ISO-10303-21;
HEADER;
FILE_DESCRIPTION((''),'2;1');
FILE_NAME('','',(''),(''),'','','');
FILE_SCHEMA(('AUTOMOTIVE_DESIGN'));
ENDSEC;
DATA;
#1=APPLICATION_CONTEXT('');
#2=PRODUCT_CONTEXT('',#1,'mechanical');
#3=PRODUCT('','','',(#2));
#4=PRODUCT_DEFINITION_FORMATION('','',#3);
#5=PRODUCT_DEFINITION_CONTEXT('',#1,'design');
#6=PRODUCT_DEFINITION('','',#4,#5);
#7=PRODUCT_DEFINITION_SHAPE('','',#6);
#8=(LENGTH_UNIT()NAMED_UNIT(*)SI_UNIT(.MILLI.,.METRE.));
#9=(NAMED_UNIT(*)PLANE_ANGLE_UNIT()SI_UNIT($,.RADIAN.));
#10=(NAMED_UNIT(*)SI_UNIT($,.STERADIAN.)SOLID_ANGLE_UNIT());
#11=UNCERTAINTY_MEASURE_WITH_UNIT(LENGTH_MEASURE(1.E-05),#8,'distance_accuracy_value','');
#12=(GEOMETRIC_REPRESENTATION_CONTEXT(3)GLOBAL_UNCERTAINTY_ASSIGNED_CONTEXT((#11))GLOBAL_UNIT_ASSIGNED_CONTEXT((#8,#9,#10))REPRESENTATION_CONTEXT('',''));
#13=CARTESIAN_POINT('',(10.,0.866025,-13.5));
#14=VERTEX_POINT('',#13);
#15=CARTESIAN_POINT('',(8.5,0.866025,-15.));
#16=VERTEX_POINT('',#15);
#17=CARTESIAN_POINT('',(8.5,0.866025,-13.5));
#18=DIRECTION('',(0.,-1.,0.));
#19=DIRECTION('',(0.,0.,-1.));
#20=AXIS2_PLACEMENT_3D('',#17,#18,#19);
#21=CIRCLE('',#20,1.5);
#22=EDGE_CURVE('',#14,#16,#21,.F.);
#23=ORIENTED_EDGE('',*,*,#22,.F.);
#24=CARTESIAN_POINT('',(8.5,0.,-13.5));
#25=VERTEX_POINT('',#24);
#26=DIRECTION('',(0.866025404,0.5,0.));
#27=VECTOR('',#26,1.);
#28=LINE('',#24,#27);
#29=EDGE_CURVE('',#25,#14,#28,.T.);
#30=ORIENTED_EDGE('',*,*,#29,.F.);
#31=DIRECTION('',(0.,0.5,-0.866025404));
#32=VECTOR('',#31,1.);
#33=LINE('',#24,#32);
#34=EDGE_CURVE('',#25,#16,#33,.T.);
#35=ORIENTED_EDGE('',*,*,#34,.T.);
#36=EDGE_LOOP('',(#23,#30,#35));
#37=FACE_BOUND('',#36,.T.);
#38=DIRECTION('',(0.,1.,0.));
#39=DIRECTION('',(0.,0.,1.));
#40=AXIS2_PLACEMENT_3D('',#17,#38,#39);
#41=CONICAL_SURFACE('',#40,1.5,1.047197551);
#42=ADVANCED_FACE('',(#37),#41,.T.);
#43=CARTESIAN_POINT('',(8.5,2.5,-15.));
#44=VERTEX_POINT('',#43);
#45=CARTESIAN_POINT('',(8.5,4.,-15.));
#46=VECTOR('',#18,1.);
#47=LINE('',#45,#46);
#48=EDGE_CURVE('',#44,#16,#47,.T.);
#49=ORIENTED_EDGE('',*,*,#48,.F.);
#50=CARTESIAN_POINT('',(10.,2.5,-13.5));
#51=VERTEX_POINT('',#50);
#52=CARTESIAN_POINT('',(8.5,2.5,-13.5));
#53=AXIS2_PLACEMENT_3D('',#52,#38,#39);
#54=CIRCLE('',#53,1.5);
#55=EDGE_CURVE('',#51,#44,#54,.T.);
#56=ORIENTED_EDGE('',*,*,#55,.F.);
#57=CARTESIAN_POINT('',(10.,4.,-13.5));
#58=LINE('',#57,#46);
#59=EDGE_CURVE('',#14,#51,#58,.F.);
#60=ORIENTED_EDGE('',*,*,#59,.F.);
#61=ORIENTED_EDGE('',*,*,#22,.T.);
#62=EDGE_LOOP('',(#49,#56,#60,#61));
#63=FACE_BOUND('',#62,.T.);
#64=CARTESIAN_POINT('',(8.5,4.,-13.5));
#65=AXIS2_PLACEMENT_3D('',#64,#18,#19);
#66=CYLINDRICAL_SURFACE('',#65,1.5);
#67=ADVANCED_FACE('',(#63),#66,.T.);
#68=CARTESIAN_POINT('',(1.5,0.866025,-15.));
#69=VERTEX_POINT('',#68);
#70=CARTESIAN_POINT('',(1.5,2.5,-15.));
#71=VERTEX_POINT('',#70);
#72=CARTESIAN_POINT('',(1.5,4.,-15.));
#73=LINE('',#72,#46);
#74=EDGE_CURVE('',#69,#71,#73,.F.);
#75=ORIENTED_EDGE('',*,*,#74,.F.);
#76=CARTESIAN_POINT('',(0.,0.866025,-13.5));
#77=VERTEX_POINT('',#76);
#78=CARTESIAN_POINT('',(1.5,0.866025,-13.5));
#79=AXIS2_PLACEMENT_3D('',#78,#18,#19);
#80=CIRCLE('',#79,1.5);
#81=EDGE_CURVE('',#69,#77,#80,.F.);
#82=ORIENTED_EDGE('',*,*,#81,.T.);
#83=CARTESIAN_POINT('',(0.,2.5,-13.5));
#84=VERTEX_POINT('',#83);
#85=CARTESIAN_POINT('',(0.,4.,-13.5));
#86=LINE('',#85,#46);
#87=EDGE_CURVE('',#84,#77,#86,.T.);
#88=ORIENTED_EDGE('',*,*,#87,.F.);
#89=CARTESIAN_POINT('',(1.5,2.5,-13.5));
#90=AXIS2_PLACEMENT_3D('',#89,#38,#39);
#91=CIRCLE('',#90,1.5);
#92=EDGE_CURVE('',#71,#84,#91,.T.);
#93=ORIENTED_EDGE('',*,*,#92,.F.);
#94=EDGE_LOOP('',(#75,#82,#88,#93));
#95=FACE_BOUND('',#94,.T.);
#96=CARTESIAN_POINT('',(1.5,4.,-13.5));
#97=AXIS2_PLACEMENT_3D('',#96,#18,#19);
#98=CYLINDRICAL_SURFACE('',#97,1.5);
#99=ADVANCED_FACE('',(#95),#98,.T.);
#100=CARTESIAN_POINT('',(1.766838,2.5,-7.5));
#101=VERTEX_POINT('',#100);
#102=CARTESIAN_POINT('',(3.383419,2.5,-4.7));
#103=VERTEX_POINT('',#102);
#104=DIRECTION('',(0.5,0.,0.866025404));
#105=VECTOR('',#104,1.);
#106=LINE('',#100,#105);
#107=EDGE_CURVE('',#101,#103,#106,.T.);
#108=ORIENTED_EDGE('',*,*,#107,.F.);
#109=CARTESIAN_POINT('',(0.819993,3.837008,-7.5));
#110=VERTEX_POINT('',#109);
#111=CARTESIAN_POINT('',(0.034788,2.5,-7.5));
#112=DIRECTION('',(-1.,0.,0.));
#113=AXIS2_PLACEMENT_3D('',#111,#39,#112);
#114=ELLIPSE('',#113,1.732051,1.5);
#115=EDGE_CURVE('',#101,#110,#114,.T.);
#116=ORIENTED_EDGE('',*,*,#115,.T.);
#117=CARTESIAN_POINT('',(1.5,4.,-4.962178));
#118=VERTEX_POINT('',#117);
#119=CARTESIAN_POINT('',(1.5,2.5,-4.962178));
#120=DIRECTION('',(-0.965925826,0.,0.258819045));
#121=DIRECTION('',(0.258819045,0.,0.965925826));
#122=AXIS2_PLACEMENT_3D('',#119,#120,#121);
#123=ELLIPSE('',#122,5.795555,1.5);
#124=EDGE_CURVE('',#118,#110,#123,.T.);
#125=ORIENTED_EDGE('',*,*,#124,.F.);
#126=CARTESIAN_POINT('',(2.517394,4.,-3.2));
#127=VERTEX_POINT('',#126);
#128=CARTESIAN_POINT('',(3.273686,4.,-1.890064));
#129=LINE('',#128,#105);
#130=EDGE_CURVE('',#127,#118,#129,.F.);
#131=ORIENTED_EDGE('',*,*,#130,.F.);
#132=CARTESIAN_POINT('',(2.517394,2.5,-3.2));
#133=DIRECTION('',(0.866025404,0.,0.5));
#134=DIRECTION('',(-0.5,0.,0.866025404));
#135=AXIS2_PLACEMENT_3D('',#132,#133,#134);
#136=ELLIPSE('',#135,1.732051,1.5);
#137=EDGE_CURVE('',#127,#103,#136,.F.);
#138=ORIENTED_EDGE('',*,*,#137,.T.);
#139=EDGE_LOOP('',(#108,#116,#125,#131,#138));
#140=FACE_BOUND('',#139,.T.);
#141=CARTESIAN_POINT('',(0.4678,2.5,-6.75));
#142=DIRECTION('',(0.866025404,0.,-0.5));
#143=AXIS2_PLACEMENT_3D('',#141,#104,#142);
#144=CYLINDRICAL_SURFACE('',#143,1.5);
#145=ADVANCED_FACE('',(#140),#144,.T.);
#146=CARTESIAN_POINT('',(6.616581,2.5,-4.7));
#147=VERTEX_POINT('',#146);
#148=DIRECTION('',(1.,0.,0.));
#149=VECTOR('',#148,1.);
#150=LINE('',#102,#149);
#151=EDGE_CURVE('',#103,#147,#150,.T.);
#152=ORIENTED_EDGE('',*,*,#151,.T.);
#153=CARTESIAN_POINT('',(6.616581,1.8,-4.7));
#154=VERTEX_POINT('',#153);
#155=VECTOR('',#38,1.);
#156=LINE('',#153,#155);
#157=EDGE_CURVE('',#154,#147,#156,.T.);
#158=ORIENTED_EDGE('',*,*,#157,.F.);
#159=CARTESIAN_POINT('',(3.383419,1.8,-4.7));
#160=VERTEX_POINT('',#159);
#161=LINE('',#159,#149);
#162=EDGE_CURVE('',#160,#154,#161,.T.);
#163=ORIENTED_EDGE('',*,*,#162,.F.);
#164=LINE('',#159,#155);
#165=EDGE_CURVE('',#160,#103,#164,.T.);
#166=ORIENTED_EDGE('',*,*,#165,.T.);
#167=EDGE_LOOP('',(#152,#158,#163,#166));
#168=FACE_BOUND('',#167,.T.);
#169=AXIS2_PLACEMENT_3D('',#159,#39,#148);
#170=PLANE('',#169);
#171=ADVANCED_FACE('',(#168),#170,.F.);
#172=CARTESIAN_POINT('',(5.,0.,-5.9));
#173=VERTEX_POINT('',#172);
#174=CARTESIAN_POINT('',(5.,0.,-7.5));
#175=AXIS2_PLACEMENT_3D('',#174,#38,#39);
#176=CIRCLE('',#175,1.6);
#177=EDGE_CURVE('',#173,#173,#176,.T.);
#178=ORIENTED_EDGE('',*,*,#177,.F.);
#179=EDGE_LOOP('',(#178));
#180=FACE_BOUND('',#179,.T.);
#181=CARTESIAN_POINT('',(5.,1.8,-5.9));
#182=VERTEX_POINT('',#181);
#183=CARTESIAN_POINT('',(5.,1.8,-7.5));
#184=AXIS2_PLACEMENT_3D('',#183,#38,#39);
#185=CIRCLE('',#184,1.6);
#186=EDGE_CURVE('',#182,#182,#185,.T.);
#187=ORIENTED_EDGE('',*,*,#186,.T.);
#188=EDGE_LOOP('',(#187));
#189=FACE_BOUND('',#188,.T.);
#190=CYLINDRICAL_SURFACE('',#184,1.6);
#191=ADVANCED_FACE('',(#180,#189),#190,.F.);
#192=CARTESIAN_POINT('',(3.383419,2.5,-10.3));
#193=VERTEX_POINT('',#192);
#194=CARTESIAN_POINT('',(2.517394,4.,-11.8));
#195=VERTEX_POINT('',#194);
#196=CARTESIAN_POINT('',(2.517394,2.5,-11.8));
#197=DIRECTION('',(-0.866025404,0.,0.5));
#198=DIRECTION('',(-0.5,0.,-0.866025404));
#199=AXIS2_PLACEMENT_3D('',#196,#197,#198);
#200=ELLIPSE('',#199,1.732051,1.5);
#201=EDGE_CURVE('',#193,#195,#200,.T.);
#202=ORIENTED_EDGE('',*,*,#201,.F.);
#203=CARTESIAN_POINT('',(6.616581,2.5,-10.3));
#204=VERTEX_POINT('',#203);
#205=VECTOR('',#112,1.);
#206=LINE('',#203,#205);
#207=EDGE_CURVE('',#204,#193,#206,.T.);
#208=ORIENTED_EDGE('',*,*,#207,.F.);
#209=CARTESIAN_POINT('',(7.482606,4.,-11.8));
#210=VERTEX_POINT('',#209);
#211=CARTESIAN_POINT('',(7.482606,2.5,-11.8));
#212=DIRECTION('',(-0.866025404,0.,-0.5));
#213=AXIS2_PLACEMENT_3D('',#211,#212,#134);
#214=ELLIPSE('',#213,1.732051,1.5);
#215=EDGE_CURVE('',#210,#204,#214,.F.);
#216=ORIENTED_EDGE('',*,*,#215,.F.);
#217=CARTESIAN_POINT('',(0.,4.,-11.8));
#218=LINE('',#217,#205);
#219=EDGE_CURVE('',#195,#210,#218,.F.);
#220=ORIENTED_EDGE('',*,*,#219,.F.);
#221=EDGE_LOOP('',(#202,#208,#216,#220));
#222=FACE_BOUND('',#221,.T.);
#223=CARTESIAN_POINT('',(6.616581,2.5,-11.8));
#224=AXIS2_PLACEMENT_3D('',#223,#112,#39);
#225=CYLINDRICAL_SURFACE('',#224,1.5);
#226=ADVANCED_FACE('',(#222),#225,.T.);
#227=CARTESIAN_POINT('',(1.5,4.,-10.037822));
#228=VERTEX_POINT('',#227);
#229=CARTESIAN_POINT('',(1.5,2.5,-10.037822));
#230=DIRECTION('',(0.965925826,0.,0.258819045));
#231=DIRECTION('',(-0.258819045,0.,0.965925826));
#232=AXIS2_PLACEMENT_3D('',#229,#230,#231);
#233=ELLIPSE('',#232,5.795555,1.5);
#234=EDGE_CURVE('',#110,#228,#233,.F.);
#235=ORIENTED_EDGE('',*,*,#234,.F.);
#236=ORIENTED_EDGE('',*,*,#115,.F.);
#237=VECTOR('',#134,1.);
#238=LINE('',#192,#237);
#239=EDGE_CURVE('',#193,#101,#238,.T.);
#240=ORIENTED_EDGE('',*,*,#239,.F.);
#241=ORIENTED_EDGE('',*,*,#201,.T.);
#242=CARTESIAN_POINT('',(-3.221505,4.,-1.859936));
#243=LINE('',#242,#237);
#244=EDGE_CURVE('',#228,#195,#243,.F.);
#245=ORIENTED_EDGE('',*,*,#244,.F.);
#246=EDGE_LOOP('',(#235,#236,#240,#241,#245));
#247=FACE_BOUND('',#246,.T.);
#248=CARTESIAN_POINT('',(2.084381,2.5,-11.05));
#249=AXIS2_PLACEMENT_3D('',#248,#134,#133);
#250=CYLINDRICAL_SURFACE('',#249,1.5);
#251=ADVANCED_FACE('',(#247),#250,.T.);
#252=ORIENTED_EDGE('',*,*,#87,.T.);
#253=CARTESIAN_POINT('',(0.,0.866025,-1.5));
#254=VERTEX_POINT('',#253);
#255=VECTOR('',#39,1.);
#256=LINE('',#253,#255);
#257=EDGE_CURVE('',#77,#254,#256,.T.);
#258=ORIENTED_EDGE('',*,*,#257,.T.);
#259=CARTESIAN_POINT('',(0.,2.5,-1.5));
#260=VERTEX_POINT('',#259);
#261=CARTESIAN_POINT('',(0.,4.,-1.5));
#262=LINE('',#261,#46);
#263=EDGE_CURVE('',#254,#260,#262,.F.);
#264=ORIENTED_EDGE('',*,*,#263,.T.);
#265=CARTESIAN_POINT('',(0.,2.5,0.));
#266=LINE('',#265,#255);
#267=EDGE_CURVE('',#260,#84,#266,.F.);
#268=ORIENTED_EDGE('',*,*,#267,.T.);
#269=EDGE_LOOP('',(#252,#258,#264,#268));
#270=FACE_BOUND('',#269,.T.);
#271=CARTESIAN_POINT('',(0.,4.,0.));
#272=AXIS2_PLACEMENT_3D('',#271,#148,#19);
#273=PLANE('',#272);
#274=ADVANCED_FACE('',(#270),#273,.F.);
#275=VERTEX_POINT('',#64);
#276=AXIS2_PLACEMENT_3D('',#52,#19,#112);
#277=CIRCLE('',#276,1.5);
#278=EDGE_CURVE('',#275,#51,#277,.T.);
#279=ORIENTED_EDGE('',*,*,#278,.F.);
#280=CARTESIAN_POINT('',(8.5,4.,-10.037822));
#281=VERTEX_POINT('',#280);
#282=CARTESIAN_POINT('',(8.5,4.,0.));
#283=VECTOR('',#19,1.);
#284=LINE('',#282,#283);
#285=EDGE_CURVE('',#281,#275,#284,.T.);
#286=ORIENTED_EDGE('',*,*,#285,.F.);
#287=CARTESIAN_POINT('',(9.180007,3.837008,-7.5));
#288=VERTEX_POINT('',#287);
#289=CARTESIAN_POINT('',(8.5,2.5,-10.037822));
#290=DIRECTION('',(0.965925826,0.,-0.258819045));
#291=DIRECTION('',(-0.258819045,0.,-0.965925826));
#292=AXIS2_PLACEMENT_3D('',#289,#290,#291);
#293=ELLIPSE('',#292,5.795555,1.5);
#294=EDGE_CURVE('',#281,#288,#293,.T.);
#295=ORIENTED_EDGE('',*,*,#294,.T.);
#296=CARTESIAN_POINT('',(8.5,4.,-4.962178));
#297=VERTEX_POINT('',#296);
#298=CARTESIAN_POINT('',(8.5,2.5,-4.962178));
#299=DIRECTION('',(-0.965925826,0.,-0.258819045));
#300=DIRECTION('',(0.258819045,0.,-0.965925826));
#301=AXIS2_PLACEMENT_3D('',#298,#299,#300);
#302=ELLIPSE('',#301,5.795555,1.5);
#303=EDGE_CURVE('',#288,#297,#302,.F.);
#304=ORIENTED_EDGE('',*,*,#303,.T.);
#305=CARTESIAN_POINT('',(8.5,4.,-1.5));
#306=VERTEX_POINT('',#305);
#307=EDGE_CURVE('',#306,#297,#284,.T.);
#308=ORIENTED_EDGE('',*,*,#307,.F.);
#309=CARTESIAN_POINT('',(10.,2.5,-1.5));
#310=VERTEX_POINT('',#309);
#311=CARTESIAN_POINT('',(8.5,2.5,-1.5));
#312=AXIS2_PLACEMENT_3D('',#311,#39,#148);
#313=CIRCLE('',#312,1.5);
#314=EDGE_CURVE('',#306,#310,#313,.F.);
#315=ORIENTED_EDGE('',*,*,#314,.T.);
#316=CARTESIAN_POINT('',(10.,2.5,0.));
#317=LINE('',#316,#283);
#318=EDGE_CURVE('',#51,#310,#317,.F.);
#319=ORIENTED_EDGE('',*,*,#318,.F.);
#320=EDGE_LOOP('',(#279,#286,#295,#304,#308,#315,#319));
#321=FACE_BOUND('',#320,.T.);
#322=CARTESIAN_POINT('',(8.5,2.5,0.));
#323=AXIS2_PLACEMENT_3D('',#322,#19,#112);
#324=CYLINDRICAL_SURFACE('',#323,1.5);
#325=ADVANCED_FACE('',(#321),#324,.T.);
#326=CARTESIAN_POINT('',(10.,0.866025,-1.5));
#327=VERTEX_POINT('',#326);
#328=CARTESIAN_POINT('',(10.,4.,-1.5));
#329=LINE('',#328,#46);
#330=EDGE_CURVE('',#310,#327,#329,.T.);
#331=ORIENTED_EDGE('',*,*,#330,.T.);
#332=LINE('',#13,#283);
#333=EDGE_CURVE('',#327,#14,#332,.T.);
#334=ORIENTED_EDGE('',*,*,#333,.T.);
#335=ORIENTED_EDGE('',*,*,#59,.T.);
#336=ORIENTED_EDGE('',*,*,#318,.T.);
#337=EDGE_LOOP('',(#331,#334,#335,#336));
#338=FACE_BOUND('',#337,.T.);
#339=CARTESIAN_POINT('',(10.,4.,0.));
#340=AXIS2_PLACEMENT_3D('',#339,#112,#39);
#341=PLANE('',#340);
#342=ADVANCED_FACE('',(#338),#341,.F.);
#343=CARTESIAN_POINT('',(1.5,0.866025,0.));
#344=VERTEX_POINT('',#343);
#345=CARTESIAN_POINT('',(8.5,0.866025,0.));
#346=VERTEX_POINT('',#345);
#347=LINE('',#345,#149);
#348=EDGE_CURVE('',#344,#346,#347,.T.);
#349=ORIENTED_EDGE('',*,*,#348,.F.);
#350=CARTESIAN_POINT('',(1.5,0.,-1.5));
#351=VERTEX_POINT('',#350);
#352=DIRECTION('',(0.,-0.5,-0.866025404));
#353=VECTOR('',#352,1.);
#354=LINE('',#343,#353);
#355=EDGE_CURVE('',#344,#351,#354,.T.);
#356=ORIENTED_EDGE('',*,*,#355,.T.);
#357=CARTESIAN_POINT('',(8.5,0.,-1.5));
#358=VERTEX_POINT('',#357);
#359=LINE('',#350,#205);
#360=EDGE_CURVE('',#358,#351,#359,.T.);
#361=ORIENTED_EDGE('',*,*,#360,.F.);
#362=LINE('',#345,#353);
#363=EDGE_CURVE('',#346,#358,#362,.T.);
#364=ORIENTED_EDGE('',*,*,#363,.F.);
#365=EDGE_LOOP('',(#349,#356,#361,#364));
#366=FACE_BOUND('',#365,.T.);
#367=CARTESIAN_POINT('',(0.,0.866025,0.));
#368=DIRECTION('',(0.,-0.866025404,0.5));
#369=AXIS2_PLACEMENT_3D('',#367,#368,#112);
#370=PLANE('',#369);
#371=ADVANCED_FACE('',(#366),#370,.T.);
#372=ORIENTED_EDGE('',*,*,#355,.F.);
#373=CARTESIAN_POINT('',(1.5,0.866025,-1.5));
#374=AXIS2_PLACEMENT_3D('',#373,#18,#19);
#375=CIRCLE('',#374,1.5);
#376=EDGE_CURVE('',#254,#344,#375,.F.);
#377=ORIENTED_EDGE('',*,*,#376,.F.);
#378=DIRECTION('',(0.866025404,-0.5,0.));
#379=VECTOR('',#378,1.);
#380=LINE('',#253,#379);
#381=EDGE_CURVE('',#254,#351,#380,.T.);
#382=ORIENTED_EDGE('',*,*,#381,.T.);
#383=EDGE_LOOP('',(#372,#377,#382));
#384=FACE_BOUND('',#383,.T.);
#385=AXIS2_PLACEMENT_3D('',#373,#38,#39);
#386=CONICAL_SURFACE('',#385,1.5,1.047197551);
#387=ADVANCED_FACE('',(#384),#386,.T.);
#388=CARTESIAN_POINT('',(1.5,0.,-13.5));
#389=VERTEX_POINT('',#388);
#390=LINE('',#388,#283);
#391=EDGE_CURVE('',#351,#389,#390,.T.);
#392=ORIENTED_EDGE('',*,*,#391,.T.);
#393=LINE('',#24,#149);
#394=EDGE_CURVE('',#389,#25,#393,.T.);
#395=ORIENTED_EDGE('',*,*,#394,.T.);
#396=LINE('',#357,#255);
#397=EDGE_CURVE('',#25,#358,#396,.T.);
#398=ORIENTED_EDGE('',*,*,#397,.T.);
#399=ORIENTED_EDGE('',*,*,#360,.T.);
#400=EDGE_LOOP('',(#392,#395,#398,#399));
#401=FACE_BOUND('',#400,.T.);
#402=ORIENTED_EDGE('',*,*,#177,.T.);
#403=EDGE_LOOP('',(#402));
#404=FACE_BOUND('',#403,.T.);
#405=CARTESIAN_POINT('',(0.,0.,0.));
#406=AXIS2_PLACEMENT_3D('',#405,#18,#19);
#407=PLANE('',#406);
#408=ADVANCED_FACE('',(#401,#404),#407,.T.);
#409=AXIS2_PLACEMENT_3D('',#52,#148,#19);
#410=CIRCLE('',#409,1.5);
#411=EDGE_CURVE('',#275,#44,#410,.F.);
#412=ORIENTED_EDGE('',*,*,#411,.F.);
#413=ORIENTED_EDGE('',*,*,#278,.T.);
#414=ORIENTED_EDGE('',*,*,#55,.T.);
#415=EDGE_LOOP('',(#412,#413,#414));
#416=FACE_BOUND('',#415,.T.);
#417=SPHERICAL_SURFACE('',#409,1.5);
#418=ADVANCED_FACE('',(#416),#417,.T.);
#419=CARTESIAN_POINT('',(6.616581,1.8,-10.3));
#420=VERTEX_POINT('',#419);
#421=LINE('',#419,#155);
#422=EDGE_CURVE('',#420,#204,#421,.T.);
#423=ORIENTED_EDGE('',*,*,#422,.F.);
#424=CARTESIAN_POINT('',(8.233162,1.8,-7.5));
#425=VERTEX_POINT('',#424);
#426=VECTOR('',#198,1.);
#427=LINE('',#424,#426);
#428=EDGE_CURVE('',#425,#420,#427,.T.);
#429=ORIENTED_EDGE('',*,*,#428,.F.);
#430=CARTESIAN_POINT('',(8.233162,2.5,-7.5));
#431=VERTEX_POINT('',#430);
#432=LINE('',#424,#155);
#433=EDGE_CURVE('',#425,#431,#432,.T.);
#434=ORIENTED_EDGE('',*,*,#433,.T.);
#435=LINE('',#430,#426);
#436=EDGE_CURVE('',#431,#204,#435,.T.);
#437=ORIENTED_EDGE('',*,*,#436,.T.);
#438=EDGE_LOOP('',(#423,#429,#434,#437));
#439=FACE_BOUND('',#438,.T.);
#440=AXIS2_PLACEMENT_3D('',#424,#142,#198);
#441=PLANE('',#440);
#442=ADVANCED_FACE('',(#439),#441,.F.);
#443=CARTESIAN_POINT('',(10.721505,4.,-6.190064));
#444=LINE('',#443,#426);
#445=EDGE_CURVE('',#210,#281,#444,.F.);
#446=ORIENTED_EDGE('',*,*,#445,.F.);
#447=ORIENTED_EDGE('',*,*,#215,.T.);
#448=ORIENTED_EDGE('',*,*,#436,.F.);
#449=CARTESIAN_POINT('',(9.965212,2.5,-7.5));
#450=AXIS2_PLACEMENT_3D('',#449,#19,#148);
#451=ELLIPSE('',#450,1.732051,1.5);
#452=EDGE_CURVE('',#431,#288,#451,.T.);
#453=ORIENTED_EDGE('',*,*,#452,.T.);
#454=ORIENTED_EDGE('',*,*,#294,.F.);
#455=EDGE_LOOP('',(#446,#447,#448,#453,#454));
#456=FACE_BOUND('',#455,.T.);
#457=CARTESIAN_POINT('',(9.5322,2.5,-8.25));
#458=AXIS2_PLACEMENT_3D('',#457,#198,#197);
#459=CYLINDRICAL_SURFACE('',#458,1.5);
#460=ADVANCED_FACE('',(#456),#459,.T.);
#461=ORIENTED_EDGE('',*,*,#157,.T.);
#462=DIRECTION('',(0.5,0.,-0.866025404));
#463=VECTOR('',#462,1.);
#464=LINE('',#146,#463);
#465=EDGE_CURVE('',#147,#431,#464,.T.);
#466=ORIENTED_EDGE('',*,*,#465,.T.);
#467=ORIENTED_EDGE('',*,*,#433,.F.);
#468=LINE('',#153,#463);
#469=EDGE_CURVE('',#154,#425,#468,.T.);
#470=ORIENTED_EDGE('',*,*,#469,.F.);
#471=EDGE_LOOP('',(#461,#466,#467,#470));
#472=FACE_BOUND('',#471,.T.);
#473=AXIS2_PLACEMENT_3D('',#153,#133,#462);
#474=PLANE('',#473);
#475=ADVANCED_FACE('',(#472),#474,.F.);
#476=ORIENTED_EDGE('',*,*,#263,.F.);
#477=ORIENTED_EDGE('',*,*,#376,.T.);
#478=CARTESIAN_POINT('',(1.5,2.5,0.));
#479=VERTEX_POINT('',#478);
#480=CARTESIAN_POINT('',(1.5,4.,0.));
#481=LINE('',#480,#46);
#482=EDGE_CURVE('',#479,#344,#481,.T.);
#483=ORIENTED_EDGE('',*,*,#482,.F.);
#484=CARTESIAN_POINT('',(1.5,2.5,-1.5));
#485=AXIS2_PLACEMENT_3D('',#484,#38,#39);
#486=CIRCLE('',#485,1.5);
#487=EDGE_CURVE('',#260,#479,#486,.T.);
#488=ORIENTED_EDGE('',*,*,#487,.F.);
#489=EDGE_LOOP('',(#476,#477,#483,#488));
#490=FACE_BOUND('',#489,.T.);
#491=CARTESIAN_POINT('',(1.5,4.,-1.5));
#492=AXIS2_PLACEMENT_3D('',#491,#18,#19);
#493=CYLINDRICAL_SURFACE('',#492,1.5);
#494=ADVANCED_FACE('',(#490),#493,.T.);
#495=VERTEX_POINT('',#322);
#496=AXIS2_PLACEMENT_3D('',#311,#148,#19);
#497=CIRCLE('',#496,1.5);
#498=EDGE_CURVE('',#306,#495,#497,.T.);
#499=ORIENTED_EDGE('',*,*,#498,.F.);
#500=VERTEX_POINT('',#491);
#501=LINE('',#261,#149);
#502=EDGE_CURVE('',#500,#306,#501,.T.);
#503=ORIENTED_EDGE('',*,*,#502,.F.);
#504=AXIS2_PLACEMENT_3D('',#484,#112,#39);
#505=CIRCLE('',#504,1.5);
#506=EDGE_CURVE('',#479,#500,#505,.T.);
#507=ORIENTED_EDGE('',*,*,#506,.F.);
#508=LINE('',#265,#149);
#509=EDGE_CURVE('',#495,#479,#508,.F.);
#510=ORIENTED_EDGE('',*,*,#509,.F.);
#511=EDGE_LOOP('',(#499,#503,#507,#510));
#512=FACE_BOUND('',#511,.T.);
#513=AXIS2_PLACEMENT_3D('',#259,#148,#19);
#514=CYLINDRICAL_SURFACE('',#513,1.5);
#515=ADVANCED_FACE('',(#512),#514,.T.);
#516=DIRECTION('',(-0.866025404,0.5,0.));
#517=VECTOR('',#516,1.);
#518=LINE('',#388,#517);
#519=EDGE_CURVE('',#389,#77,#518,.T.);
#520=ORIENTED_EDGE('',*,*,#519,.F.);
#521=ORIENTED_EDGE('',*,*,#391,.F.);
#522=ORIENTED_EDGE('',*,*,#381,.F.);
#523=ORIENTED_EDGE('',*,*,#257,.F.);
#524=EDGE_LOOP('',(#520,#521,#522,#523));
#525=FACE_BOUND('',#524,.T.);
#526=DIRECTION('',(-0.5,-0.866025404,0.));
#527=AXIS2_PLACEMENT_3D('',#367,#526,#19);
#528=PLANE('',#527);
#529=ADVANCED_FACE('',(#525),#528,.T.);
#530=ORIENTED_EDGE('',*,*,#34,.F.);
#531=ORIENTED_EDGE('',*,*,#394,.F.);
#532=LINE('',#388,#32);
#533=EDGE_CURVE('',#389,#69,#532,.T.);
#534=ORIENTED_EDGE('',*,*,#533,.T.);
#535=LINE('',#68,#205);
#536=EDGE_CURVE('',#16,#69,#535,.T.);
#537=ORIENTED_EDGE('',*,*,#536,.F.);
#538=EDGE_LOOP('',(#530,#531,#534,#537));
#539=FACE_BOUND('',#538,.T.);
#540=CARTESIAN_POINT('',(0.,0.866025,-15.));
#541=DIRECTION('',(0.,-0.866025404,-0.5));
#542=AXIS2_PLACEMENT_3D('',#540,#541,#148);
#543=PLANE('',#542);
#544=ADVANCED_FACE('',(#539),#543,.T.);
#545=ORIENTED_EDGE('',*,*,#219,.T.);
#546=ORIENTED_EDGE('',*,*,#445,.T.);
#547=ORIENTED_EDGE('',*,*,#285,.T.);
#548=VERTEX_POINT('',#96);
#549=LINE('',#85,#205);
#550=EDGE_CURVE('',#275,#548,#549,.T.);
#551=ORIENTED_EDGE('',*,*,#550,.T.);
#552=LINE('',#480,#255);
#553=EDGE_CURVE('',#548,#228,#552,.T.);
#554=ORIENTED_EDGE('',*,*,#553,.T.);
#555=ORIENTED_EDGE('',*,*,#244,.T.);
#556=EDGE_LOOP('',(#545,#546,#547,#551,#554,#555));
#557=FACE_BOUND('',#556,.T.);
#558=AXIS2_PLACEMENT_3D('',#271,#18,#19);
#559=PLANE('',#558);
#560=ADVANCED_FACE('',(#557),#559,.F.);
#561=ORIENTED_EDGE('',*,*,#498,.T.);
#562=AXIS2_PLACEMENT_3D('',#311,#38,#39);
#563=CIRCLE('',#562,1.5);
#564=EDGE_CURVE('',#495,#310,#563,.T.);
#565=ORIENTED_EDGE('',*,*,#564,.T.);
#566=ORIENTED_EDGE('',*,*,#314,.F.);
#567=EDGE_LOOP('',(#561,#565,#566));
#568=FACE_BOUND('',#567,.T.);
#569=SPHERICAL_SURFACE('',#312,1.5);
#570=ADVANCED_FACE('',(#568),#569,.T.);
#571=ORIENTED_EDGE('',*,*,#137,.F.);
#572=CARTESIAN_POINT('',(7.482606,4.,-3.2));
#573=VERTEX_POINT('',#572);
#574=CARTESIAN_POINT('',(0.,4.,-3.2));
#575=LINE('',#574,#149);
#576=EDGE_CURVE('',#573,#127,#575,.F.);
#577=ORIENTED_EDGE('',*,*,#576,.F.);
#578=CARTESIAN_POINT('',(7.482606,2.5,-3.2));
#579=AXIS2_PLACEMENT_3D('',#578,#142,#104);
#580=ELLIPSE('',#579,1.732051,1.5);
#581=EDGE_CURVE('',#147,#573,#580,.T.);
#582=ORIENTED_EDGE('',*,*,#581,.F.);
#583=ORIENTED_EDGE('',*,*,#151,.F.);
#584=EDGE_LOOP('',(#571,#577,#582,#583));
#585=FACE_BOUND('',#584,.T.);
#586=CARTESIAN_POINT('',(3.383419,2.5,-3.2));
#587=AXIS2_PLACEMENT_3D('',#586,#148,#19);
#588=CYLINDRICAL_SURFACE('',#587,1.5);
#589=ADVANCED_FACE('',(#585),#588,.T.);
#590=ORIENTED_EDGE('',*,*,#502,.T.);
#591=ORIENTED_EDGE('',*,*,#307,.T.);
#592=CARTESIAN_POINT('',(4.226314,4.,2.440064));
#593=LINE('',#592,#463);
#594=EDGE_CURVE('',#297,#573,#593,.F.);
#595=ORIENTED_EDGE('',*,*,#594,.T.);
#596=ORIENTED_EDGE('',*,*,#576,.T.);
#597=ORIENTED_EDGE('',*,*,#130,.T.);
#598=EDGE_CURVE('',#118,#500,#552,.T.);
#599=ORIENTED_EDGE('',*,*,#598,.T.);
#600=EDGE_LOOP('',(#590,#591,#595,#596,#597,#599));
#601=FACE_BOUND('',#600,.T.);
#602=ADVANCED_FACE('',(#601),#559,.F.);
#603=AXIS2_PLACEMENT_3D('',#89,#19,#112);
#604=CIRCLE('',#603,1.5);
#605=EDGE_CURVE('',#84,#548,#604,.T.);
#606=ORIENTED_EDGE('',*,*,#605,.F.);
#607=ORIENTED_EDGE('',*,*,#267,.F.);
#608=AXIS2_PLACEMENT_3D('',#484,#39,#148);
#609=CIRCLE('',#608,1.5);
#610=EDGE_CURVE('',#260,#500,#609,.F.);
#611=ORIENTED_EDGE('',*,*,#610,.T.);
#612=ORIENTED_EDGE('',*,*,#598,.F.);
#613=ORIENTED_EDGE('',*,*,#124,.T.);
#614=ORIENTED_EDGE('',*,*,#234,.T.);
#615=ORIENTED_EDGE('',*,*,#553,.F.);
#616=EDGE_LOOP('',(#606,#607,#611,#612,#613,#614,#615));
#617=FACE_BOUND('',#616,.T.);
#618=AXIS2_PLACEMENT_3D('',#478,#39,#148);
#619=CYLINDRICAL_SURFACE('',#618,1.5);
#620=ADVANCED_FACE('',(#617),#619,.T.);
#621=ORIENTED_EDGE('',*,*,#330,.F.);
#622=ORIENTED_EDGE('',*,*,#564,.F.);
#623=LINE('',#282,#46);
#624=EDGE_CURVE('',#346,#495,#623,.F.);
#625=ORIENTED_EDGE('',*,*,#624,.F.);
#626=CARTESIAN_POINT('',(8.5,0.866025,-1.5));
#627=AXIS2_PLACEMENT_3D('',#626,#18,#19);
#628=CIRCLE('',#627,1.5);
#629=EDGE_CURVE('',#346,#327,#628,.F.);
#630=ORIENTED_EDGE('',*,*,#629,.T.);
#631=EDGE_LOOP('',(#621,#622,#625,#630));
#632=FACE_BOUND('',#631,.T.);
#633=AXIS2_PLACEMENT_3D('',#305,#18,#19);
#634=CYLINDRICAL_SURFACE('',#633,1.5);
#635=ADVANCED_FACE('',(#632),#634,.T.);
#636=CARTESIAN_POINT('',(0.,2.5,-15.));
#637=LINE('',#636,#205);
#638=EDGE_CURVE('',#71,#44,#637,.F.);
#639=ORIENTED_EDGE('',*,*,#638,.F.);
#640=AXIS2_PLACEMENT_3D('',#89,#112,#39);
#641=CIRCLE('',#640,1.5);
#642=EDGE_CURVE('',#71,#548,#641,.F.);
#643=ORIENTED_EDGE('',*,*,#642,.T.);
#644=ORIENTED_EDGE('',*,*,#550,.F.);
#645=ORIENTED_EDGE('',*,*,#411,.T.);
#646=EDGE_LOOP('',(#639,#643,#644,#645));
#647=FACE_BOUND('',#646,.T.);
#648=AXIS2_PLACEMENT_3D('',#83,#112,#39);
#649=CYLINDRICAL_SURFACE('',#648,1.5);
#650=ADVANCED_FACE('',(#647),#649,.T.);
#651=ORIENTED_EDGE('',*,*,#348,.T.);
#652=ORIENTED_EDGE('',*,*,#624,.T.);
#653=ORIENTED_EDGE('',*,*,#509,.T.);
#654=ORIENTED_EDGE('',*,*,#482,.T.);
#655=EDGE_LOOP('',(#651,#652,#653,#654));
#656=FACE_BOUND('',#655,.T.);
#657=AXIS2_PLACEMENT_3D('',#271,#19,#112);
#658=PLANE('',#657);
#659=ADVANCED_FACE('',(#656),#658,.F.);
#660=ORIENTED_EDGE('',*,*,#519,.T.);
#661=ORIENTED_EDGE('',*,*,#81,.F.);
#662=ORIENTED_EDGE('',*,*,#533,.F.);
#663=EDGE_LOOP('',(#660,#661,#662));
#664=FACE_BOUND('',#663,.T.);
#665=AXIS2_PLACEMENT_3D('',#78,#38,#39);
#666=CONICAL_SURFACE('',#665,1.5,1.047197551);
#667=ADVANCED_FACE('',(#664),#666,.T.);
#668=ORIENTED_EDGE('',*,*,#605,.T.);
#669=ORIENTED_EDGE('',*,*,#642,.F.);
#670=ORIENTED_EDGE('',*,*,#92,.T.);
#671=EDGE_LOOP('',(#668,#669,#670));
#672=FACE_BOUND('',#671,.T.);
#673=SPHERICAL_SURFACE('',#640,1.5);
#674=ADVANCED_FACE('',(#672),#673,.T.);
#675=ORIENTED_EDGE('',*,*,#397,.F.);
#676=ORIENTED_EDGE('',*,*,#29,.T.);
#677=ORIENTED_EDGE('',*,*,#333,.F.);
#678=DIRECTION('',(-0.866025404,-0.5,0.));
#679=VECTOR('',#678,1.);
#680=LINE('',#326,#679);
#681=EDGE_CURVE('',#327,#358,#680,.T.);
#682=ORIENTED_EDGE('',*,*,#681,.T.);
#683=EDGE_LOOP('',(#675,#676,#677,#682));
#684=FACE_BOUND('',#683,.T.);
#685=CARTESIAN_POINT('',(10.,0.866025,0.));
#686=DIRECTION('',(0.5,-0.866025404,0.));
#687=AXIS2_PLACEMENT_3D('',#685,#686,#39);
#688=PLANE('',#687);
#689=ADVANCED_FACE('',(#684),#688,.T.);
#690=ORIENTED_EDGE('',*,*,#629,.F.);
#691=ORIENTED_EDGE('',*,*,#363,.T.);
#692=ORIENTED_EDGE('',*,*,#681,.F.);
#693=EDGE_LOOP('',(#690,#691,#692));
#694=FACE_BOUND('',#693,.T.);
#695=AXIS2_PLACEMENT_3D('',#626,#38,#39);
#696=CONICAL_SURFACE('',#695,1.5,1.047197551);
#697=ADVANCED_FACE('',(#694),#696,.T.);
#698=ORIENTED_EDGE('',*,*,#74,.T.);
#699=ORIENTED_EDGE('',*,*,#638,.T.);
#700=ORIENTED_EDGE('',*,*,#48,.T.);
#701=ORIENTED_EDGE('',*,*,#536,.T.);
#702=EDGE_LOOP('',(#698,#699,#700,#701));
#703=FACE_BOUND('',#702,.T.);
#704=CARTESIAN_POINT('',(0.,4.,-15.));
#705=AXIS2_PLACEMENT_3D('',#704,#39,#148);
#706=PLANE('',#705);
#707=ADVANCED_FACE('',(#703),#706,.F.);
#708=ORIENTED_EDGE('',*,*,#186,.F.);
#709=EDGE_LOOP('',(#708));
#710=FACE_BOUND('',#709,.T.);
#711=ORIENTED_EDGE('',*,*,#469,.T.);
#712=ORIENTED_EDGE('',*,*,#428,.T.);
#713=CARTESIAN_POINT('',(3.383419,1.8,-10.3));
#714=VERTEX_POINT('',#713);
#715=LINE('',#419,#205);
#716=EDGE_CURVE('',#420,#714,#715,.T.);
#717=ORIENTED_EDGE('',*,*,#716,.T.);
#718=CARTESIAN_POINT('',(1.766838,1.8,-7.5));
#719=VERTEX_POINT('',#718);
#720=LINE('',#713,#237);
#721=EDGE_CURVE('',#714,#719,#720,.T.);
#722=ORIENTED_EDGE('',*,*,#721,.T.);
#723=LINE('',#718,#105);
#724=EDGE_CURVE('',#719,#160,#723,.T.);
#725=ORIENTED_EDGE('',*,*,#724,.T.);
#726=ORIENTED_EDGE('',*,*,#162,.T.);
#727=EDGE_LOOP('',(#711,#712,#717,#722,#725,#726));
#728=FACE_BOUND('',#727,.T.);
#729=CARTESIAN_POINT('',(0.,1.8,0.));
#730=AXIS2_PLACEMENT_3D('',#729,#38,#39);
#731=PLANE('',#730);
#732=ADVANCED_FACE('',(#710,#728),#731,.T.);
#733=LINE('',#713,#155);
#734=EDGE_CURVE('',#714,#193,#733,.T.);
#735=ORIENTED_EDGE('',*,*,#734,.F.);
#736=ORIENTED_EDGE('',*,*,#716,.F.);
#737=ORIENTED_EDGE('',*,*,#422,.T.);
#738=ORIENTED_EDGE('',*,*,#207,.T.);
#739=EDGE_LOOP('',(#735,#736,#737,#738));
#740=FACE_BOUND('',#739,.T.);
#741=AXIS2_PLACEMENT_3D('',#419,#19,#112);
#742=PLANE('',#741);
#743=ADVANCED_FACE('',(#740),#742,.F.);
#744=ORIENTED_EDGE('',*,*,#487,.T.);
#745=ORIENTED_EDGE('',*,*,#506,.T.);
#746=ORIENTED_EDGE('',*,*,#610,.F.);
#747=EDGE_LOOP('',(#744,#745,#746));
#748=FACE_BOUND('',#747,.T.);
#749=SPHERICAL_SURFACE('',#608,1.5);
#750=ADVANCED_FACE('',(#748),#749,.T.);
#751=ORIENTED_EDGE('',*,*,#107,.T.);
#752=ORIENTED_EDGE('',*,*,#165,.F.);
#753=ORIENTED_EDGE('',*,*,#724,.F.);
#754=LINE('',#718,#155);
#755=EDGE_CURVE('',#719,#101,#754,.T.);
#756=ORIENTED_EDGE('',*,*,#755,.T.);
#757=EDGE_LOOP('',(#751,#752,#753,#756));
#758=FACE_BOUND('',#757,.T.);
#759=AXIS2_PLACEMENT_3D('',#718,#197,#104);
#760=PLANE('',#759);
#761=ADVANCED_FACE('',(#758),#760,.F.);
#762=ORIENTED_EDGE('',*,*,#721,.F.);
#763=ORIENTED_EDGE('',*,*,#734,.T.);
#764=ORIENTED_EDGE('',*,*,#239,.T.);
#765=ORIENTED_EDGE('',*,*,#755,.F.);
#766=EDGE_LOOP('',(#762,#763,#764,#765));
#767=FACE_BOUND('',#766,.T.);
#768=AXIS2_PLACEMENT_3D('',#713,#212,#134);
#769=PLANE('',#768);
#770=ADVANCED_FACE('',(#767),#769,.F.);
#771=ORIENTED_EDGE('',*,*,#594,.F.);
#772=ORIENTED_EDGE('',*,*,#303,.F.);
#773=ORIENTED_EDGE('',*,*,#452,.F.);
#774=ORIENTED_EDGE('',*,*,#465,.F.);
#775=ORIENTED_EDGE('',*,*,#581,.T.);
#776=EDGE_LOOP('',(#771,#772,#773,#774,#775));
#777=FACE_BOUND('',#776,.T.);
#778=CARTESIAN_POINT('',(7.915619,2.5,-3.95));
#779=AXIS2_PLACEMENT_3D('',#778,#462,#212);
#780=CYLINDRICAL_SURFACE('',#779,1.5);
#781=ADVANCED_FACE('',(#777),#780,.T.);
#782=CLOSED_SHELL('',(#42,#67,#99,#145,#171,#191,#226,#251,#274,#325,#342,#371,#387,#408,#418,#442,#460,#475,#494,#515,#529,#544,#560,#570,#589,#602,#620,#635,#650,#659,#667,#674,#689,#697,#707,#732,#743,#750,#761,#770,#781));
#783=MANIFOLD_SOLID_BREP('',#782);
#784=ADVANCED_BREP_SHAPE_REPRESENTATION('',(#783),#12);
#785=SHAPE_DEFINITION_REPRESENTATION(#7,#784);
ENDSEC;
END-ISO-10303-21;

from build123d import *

# Parameters (mm, degrees)
SKETCH1_W            = 10
SKETCH1_H            = 15
BOSS_EXTRUDE1_DEPTH  = 4
CUT_EXTRUDE1_DEPTH   = 2.2
M3_CLEARANCE_HOLE1_D = 3.2
FILLET1_R            = 1.5
CHAMFER1_SIZE        = 0.866025404
CHAMFER1_SIZE_2      = 1.5


with BuildPart() as part:
    # Sketch1 → Boss-Extrude1 (new body)
    with BuildSketch(Plane(origin=(0, 0, 0), x_dir=(1, 0, 0), z_dir=(0, 1, 0))):
        with Locations((5, 7.5)):
            Rectangle(SKETCH1_W, SKETCH1_H)
    extrude(amount=BOSS_EXTRUDE1_DEPTH)

    # Sketch2 → Cut-Extrude1 (cut)
    with BuildSketch(Plane(origin=(0, 4, 0), x_dir=(1, 0, 0), z_dir=(0, 1, 0))):
        Polygon((8.233161507, 7.5), (6.616580754, 10.3), (3.383419246, 10.3), (1.766838493, 7.5), (3.383419246, 4.7), (6.616580754, 4.7), align=None)
    extrude(amount=-CUT_EXTRUDE1_DEPTH, mode=Mode.SUBTRACT)

    # M3 Clearance Hole1 (through all)
    with Locations(Plane(origin=(5, 1.8, -7.5), x_dir=(0, 0, 1), z_dir=(0, 1, 0))):
        with Locations((0, 0)):
            Hole(M3_CLEARANCE_HOLE1_D / 2)

    # Fillet1
    # the kernel refuses this fillet: 1.5 mm, written as the material it takes off along each edge
    with BuildSketch(Plane(origin=(8.5, 2.5, -1.5), x_dir=(1, 0, 0), z_dir=(0, 0, 1))) as fillet1_piece_1_section:
        Polygon((0, 0), (FILLET1_R, 0), (FILLET1_R, FILLET1_R), (0, FILLET1_R), align=None)
    fillet1_piece_1 = extrude(amount=FILLET1_R, mode=Mode.PRIVATE)
    fillet1_piece_1 = fillet1_piece_1 - Plane(origin=(8.5, 2.5, -1.5), x_dir=(-0.7071067811865475, -0.7071067811865475, 0), z_dir=(0, 0, 1)) * Sphere(FILLET1_R, mode=Mode.PRIVATE)
    add(fillet1_piece_1, mode=Mode.SUBTRACT)
    with BuildSketch(Plane(origin=(8.5, 2.5, -13.5), x_dir=(0, 1, 0), z_dir=(1, 0, 0))) as fillet1_piece_2_section:
        Polygon((0, 0), (FILLET1_R, 0), (FILLET1_R, -FILLET1_R), (0, -FILLET1_R), align=None)
    fillet1_piece_2 = extrude(amount=FILLET1_R, mode=Mode.PRIVATE)
    fillet1_piece_2 = fillet1_piece_2 - Plane(origin=(8.5, 2.5, -13.5), x_dir=(0, -0.7071067811865475, 0.7071067811865475), z_dir=(1, 0, 0)) * Sphere(FILLET1_R, mode=Mode.PRIVATE)
    add(fillet1_piece_2, mode=Mode.SUBTRACT)
    with BuildSketch(Plane(origin=(1.5, 2.5, -13.5), x_dir=(0, 1, 0), z_dir=(-1, 0, 0))) as fillet1_piece_3_section:
        Polygon((0, 0), (FILLET1_R, 0), (FILLET1_R, FILLET1_R), (0, FILLET1_R), align=None)
    fillet1_piece_3 = extrude(amount=FILLET1_R, mode=Mode.PRIVATE)
    fillet1_piece_3 = fillet1_piece_3 - Plane(origin=(1.5, 2.5, -13.5), x_dir=(0, -0.7071067811865475, 0.7071067811865475), z_dir=(-1, 0, 0)) * Sphere(FILLET1_R, mode=Mode.PRIVATE)
    add(fillet1_piece_3, mode=Mode.SUBTRACT)
    with BuildSketch(Plane(origin=(1.5, 2.5, -1.5), x_dir=(-1, 0, 0), z_dir=(0, 0, 1))) as fillet1_piece_4_section:
        Polygon((0, 0), (FILLET1_R, 0), (FILLET1_R, -FILLET1_R), (0, -FILLET1_R), align=None)
    fillet1_piece_4 = extrude(amount=FILLET1_R, mode=Mode.PRIVATE)
    fillet1_piece_4 = fillet1_piece_4 - Plane(origin=(1.5, 2.5, -1.5), x_dir=(0.7071067811865475, -0.7071067811865475, 0), z_dir=(0, 0, 1)) * Sphere(FILLET1_R, mode=Mode.PRIVATE)
    add(fillet1_piece_4, mode=Mode.SUBTRACT)
    with BuildSketch(Plane(origin=(10, 4, -1.5), x_dir=(0, -1, 0), z_dir=(0, 0, -1)), Plane(origin=(0, 4, -13.5), x_dir=(0, -1, 0), z_dir=(0, 0, 1))) as fillet1_piece_5:
        with BuildLine():
            CenterArc((FILLET1_R, FILLET1_R), FILLET1_R, 180, 90)
            Line((0, FILLET1_R), (0, 0))
            Line((0, 0), (FILLET1_R, 0))
        make_face()
    extrude(amount=12, mode=Mode.SUBTRACT)
    with BuildSketch(Plane(origin=(8.5, 4, -15), x_dir=(0, 0, 1), z_dir=(-1, 0, 0))) as fillet1_piece_6:
        with BuildLine():
            CenterArc((FILLET1_R, -FILLET1_R), FILLET1_R, 90, 90)
            Line((0, -FILLET1_R), (0, 0))
            Line((0, 0), (FILLET1_R, 0))
        make_face()
    extrude(amount=7, mode=Mode.SUBTRACT)
    with BuildSketch(Plane(origin=(4.741580754, 4, -1.452404736), x_dir=(0.866025403784439, 0, 0.49999999999999933), z_dir=(0.49999999999999933, 0, -0.866025403784439))) as fillet1_piece_7_section:
        with BuildLine():
            CenterArc((FILLET1_R, FILLET1_R), FILLET1_R, 180, 90)
            Line((0, FILLET1_R), (0, 0))
            Line((0, 0), (FILLET1_R, 0))
        make_face()
    fillet1_piece_7 = extrude(amount=10.733161507, mode=Mode.PRIVATE)
    fillet1_piece_7 = split(fillet1_piece_7, bisect_by=Plane(origin=(9.978951884, 4, -4.476202368), z_dir=(-0.8660254037844388, 0, 0.4999999999999998)), keep=Keep.TOP, mode=Mode.PRIVATE)
    fillet1_piece_7 = split(fillet1_piece_7, bisect_by=Plane(origin=(4.741580754, 4, -4.7), z_dir=(0, 0, -1)), keep=Keep.TOP, mode=Mode.PRIVATE)
    add(fillet1_piece_7, mode=Mode.SUBTRACT)
    with BuildSketch(Plane(origin=(10.108161507, 4, -4.252404736), x_dir=(0.8660254037844388, 0, -0.4999999999999998), z_dir=(-0.4999999999999998, 0, -0.8660254037844388))) as fillet1_piece_8_section:
        with BuildLine():
            CenterArc((FILLET1_R, FILLET1_R), FILLET1_R, 180, 90)
            Line((0, FILLET1_R), (0, 0))
            Line((0, 0), (FILLET1_R, 0))
        make_face()
    fillet1_piece_8 = extrude(amount=10.733161507, mode=Mode.PRIVATE)
    fillet1_piece_8 = split(fillet1_piece_8, bisect_by=Plane(origin=(7.295661507, 4, -5.876202368), z_dir=(-0.866025403784439, 0, -0.49999999999999933)), keep=Keep.TOP, mode=Mode.PRIVATE)
    fillet1_piece_8 = split(fillet1_piece_8, bisect_by=Plane(origin=(10.108161507, 4, -10.3), z_dir=(0, 0, 1)), keep=Keep.TOP, mode=Mode.PRIVATE)
    add(fillet1_piece_8, mode=Mode.SUBTRACT)
    with BuildSketch(Plane(origin=(10.366580754, 4, -10.3), x_dir=(0, 0, -1), z_dir=(-1, 0, 0))) as fillet1_piece_9_section:
        with BuildLine():
            CenterArc((FILLET1_R, FILLET1_R), FILLET1_R, 180, 90)
            Line((0, FILLET1_R), (0, 0))
            Line((0, 0), (FILLET1_R, 0))
        make_face()
    fillet1_piece_9 = extrude(amount=10.733161507, mode=Mode.PRIVATE)
    fillet1_piece_9 = split(fillet1_piece_9, bisect_by=Plane(origin=(7.554080754, 4, -8.676202368), z_dir=(-0.8660254037844388, 0, 0.4999999999999998)), keep=Keep.TOP, mode=Mode.PRIVATE)
    fillet1_piece_9 = split(fillet1_piece_9, bisect_by=Plane(origin=(5.129209623, 4, -13.323797632), z_dir=(0.8660254037844387, 0, 0.49999999999999994)), keep=Keep.TOP, mode=Mode.PRIVATE)
    add(fillet1_piece_9, mode=Mode.SUBTRACT)
    with BuildSketch(Plane(origin=(5.258419246, 4, -13.547595264), x_dir=(-0.8660254037844387, 0, -0.49999999999999994), z_dir=(-0.49999999999999994, 0, 0.8660254037844387))) as fillet1_piece_10_section:
        with BuildLine():
            CenterArc((FILLET1_R, FILLET1_R), FILLET1_R, 180, 90)
            Line((0, FILLET1_R), (0, 0))
            Line((0, 0), (FILLET1_R, 0))
        make_face()
    fillet1_piece_10 = extrude(amount=10.733161507, mode=Mode.PRIVATE)
    fillet1_piece_10 = split(fillet1_piece_10, bisect_by=Plane(origin=(5.258419246, 4, -10.3), z_dir=(0, 0, 1)), keep=Keep.TOP, mode=Mode.PRIVATE)
    fillet1_piece_10 = split(fillet1_piece_10, bisect_by=Plane(origin=(0.021048116, 4, -10.523797632), z_dir=(0.8660254037844386, 0, -0.5000000000000001)), keep=Keep.TOP, mode=Mode.PRIVATE)
    add(fillet1_piece_10, mode=Mode.SUBTRACT)
    with BuildSketch(Plane(origin=(-0.108161507, 4, -10.747595264), x_dir=(-0.8660254037844387, 0, 0.5000000000000001), z_dir=(0.5000000000000001, 0, 0.8660254037844386))) as fillet1_piece_11_section:
        with BuildLine():
            CenterArc((FILLET1_R, FILLET1_R), FILLET1_R, 180, 90)
            Line((0, FILLET1_R), (0, 0))
            Line((0, 0), (FILLET1_R, 0))
        make_face()
    fillet1_piece_11 = extrude(amount=10.733161507, mode=Mode.PRIVATE)
    fillet1_piece_11 = split(fillet1_piece_11, bisect_by=Plane(origin=(2.704338493, 4, -9.123797632), z_dir=(0.8660254037844387, 0, 0.49999999999999994)), keep=Keep.TOP, mode=Mode.PRIVATE)
    fillet1_piece_11 = split(fillet1_piece_11, bisect_by=Plane(origin=(-0.108161507, 4, -4.7), z_dir=(0, 0, -1)), keep=Keep.TOP, mode=Mode.PRIVATE)
    add(fillet1_piece_11, mode=Mode.SUBTRACT)
    with BuildSketch(Plane(origin=(-0.366580754, 4, -4.7), x_dir=(0, 0, 1), z_dir=(1, 0, 0))) as fillet1_piece_12_section:
        with BuildLine():
            CenterArc((FILLET1_R, FILLET1_R), FILLET1_R, 180, 90)
            Line((0, FILLET1_R), (0, 0))
            Line((0, 0), (FILLET1_R, 0))
        make_face()
    fillet1_piece_12 = extrude(amount=10.733161507, mode=Mode.PRIVATE)
    fillet1_piece_12 = split(fillet1_piece_12, bisect_by=Plane(origin=(2.445919246, 4, -6.323797632), z_dir=(0.8660254037844386, 0, -0.5000000000000001)), keep=Keep.TOP, mode=Mode.PRIVATE)
    fillet1_piece_12 = split(fillet1_piece_12, bisect_by=Plane(origin=(4.870790377, 4, -1.676202368), z_dir=(-0.866025403784439, 0, -0.49999999999999933)), keep=Keep.TOP, mode=Mode.PRIVATE)
    add(fillet1_piece_12, mode=Mode.SUBTRACT)
    with BuildSketch(Plane(origin=(0, -3.75, -15), x_dir=(0, 0, 1), z_dir=(0, 1, 0)), Plane(origin=(0, -3.75, 0), x_dir=(1, 0, 0), z_dir=(0, 1, 0))) as fillet1_piece_13:
        with BuildLine():
            CenterArc((FILLET1_R, FILLET1_R), FILLET1_R, 180, 90)
            Line((0, FILLET1_R), (0, 0))
            Line((0, 0), (FILLET1_R, 0))
        make_face()
    extrude(amount=6.25, mode=Mode.SUBTRACT)
    with BuildSketch(Plane(origin=(10, -3.75, -15), x_dir=(0, 0, 1), z_dir=(0, 1, 0)), Plane(origin=(10, -3.75, 0), x_dir=(-1, 0, 0), z_dir=(0, 1, 0))) as fillet1_piece_14:
        with BuildLine():
            CenterArc((FILLET1_R, -FILLET1_R), FILLET1_R, 90, 90)
            Line((0, -FILLET1_R), (0, 0))
            Line((0, 0), (FILLET1_R, 0))
        make_face()
    extrude(amount=6.25, mode=Mode.SUBTRACT)
    with BuildSketch(Plane(origin=(1.5, 4, 0), x_dir=(0, -1, 0), z_dir=(1, 0, 0))) as fillet1_piece_15:
        with BuildLine():
            CenterArc((FILLET1_R, FILLET1_R), FILLET1_R, 180, 90)
            Line((0, FILLET1_R), (0, 0))
            Line((0, 0), (FILLET1_R, 0))
        make_face()
    extrude(amount=7, mode=Mode.SUBTRACT)
    with BuildSketch(Plane(origin=(-0.366580754, 4, -4.7), x_dir=(0, 0, 1), z_dir=(1, 0, 0))) as fillet1_piece_16a_section:
        with BuildLine():
            CenterArc((FILLET1_R, FILLET1_R), FILLET1_R, 180, 90)
            Line((0, FILLET1_R), (0, 0))
            Line((0, 0), (FILLET1_R, 0))
        make_face()
    fillet1_piece_16a = extrude(amount=10.733161507, mode=Mode.PRIVATE)
    fillet1_piece_16a = split(fillet1_piece_16a, bisect_by=Plane(origin=(4.870790377, 4, -1.676202368), z_dir=(0.866025403784439, 0, 0.49999999999999933)), keep=Keep.TOP, mode=Mode.PRIVATE)
    with BuildSketch(Plane(origin=(4.741580754, 4, -1.452404736), x_dir=(0.866025403784439, 0, 0.49999999999999933), z_dir=(0.49999999999999933, 0, -0.866025403784439))) as fillet1_piece_16b_section:
        with BuildLine():
            CenterArc((FILLET1_R, FILLET1_R), FILLET1_R, 180, 90)
            Line((0, FILLET1_R), (0, 0))
            Line((0, 0), (FILLET1_R, 0))
        make_face()
    fillet1_piece_16b = extrude(amount=10.733161507, mode=Mode.PRIVATE)
    fillet1_piece_16b = split(fillet1_piece_16b, bisect_by=Plane(origin=(4.741580754, 4, -4.7), z_dir=(0, 0, 1)), keep=Keep.TOP, mode=Mode.PRIVATE)
    fillet1_piece_16 = fillet1_piece_16a & fillet1_piece_16b
    add(fillet1_piece_16, mode=Mode.SUBTRACT)
    with BuildSketch(Plane(origin=(10.108161507, 4, -4.252404736), x_dir=(0.8660254037844388, 0, -0.4999999999999998), z_dir=(-0.4999999999999998, 0, -0.8660254037844388))) as fillet1_piece_17a_section:
        with BuildLine():
            CenterArc((FILLET1_R, FILLET1_R), FILLET1_R, 180, 90)
            Line((0, FILLET1_R), (0, 0))
            Line((0, 0), (FILLET1_R, 0))
        make_face()
    fillet1_piece_17a = extrude(amount=10.733161507, mode=Mode.PRIVATE)
    fillet1_piece_17a = split(fillet1_piece_17a, bisect_by=Plane(origin=(7.295661507, 4, -5.876202368), z_dir=(0.866025403784439, 0, 0.49999999999999933)), keep=Keep.TOP, mode=Mode.PRIVATE)
    with BuildSketch(Plane(origin=(4.741580754, 4, -1.452404736), x_dir=(0.866025403784439, 0, 0.49999999999999933), z_dir=(0.49999999999999933, 0, -0.866025403784439))) as fillet1_piece_17b_section:
        with BuildLine():
            CenterArc((FILLET1_R, FILLET1_R), FILLET1_R, 180, 90)
            Line((0, FILLET1_R), (0, 0))
            Line((0, 0), (FILLET1_R, 0))
        make_face()
    fillet1_piece_17b = extrude(amount=10.733161507, mode=Mode.PRIVATE)
    fillet1_piece_17b = split(fillet1_piece_17b, bisect_by=Plane(origin=(9.978951884, 4, -4.476202368), z_dir=(0.8660254037844388, 0, -0.4999999999999998)), keep=Keep.TOP, mode=Mode.PRIVATE)
    fillet1_piece_17 = fillet1_piece_17a & fillet1_piece_17b
    add(fillet1_piece_17, mode=Mode.SUBTRACT)
    with BuildSketch(Plane(origin=(10.108161507, 4, -4.252404736), x_dir=(0.8660254037844388, 0, -0.4999999999999998), z_dir=(-0.4999999999999998, 0, -0.8660254037844388))) as fillet1_piece_18a_section:
        with BuildLine():
            CenterArc((FILLET1_R, FILLET1_R), FILLET1_R, 180, 90)
            Line((0, FILLET1_R), (0, 0))
            Line((0, 0), (FILLET1_R, 0))
        make_face()
    fillet1_piece_18a = extrude(amount=10.733161507, mode=Mode.PRIVATE)
    fillet1_piece_18a = split(fillet1_piece_18a, bisect_by=Plane(origin=(10.108161507, 4, -10.3), z_dir=(0, 0, -1)), keep=Keep.TOP, mode=Mode.PRIVATE)
    with BuildSketch(Plane(origin=(10.366580754, 4, -10.3), x_dir=(0, 0, -1), z_dir=(-1, 0, 0))) as fillet1_piece_18b_section:
        with BuildLine():
            CenterArc((FILLET1_R, FILLET1_R), FILLET1_R, 180, 90)
            Line((0, FILLET1_R), (0, 0))
            Line((0, 0), (FILLET1_R, 0))
        make_face()
    fillet1_piece_18b = extrude(amount=10.733161507, mode=Mode.PRIVATE)
    fillet1_piece_18b = split(fillet1_piece_18b, bisect_by=Plane(origin=(7.554080754, 4, -8.676202368), z_dir=(0.8660254037844388, 0, -0.4999999999999998)), keep=Keep.TOP, mode=Mode.PRIVATE)
    fillet1_piece_18 = fillet1_piece_18a & fillet1_piece_18b
    add(fillet1_piece_18, mode=Mode.SUBTRACT)
    with BuildSketch(Plane(origin=(10.366580754, 4, -10.3), x_dir=(0, 0, -1), z_dir=(-1, 0, 0))) as fillet1_piece_19a_section:
        with BuildLine():
            CenterArc((FILLET1_R, FILLET1_R), FILLET1_R, 180, 90)
            Line((0, FILLET1_R), (0, 0))
            Line((0, 0), (FILLET1_R, 0))
        make_face()
    fillet1_piece_19a = extrude(amount=10.733161507, mode=Mode.PRIVATE)
    fillet1_piece_19a = split(fillet1_piece_19a, bisect_by=Plane(origin=(5.129209623, 4, -13.323797632), z_dir=(-0.8660254037844387, 0, -0.49999999999999994)), keep=Keep.TOP, mode=Mode.PRIVATE)
    with BuildSketch(Plane(origin=(5.258419246, 4, -13.547595264), x_dir=(-0.8660254037844387, 0, -0.49999999999999994), z_dir=(-0.49999999999999994, 0, 0.8660254037844387))) as fillet1_piece_19b_section:
        with BuildLine():
            CenterArc((FILLET1_R, FILLET1_R), FILLET1_R, 180, 90)
            Line((0, FILLET1_R), (0, 0))
            Line((0, 0), (FILLET1_R, 0))
        make_face()
    fillet1_piece_19b = extrude(amount=10.733161507, mode=Mode.PRIVATE)
    fillet1_piece_19b = split(fillet1_piece_19b, bisect_by=Plane(origin=(5.258419246, 4, -10.3), z_dir=(0, 0, -1)), keep=Keep.TOP, mode=Mode.PRIVATE)
    fillet1_piece_19 = fillet1_piece_19a & fillet1_piece_19b
    add(fillet1_piece_19, mode=Mode.SUBTRACT)
    with BuildSketch(Plane(origin=(5.258419246, 4, -13.547595264), x_dir=(-0.8660254037844387, 0, -0.49999999999999994), z_dir=(-0.49999999999999994, 0, 0.8660254037844387))) as fillet1_piece_20a_section:
        with BuildLine():
            CenterArc((FILLET1_R, FILLET1_R), FILLET1_R, 180, 90)
            Line((0, FILLET1_R), (0, 0))
            Line((0, 0), (FILLET1_R, 0))
        make_face()
    fillet1_piece_20a = extrude(amount=10.733161507, mode=Mode.PRIVATE)
    fillet1_piece_20a = split(fillet1_piece_20a, bisect_by=Plane(origin=(0.021048116, 4, -10.523797632), z_dir=(-0.8660254037844386, 0, 0.5000000000000001)), keep=Keep.TOP, mode=Mode.PRIVATE)
    with BuildSketch(Plane(origin=(-0.108161507, 4, -10.747595264), x_dir=(-0.8660254037844387, 0, 0.5000000000000001), z_dir=(0.5000000000000001, 0, 0.8660254037844386))) as fillet1_piece_20b_section:
        with BuildLine():
            CenterArc((FILLET1_R, FILLET1_R), FILLET1_R, 180, 90)
            Line((0, FILLET1_R), (0, 0))
            Line((0, 0), (FILLET1_R, 0))
        make_face()
    fillet1_piece_20b = extrude(amount=10.733161507, mode=Mode.PRIVATE)
    fillet1_piece_20b = split(fillet1_piece_20b, bisect_by=Plane(origin=(2.704338493, 4, -9.123797632), z_dir=(-0.8660254037844387, 0, -0.49999999999999994)), keep=Keep.TOP, mode=Mode.PRIVATE)
    fillet1_piece_20 = fillet1_piece_20a & fillet1_piece_20b
    add(fillet1_piece_20, mode=Mode.SUBTRACT)
    with BuildSketch(Plane(origin=(-0.108161507, 4, -10.747595264), x_dir=(-0.8660254037844387, 0, 0.5000000000000001), z_dir=(0.5000000000000001, 0, 0.8660254037844386))) as fillet1_piece_21a_section:
        with BuildLine():
            CenterArc((FILLET1_R, FILLET1_R), FILLET1_R, 180, 90)
            Line((0, FILLET1_R), (0, 0))
            Line((0, 0), (FILLET1_R, 0))
        make_face()
    fillet1_piece_21a = extrude(amount=10.733161507, mode=Mode.PRIVATE)
    fillet1_piece_21a = split(fillet1_piece_21a, bisect_by=Plane(origin=(-0.108161507, 4, -4.7), z_dir=(0, 0, 1)), keep=Keep.TOP, mode=Mode.PRIVATE)
    with BuildSketch(Plane(origin=(-0.366580754, 4, -4.7), x_dir=(0, 0, 1), z_dir=(1, 0, 0))) as fillet1_piece_21b_section:
        with BuildLine():
            CenterArc((FILLET1_R, FILLET1_R), FILLET1_R, 180, 90)
            Line((0, FILLET1_R), (0, 0))
            Line((0, 0), (FILLET1_R, 0))
        make_face()
    fillet1_piece_21b = extrude(amount=10.733161507, mode=Mode.PRIVATE)
    fillet1_piece_21b = split(fillet1_piece_21b, bisect_by=Plane(origin=(2.445919246, 4, -6.323797632), z_dir=(-0.8660254037844386, 0, 0.5000000000000001)), keep=Keep.TOP, mode=Mode.PRIVATE)
    fillet1_piece_21 = fillet1_piece_21a & fillet1_piece_21b
    add(fillet1_piece_21, mode=Mode.SUBTRACT)

    # Chamfer1
    # the kernel refuses this chamfer: 1.5, 0.866025404 mm, written as the material it takes off along each edge
    with BuildSketch(Plane(origin=(8.5, 0, -15), x_dir=(0, 1, 0), z_dir=(-1, 0, 0)), Plane(origin=(1.5, 0, 0), x_dir=(0, 1, 0), z_dir=(1, 0, 0))) as chamfer1_piece_1:
        Polygon((CHAMFER1_SIZE, 0), (0, -CHAMFER1_SIZE_2), (0, 0), align=None)
    extrude(amount=7, mode=Mode.SUBTRACT)
    with BuildSketch(Plane(origin=(10, 0, -1.5), x_dir=(0, 1, 0), z_dir=(0, 0, -1)), Plane(origin=(0, 0, -13.5), x_dir=(0, 1, 0), z_dir=(0, 0, 1))) as chamfer1_piece_2:
        Polygon((CHAMFER1_SIZE, 0), (0, -CHAMFER1_SIZE_2), (0, 0), align=None)
    extrude(amount=12, mode=Mode.SUBTRACT)
    with BuildSketch(Plane(origin=(8.5, 0, -13.5), x_dir=(0, 0, -1), z_dir=(-1, 0, 0))) as chamfer1_piece_3:
        Polygon((1.5, -CHAMFER1_SIZE), (1.5 - CHAMFER1_SIZE_2, 0), (1.5, 0), align=None)
    revolve(axis=Axis((8.5, 0, -13.5), (0, -1, 0)), revolution_arc=90, mode=Mode.SUBTRACT)
    with BuildSketch(Plane(origin=(1.5, 0, -13.5), x_dir=(-1, 0, 0), z_dir=(0, 0, 1))) as chamfer1_piece_4:
        Polygon((1.5, -CHAMFER1_SIZE), (1.5 - CHAMFER1_SIZE_2, 0), (1.5, 0), align=None)
    revolve(axis=Axis((1.5, 0, -13.5), (0, -1, 0)), revolution_arc=90, mode=Mode.SUBTRACT)
    with BuildSketch(Plane(origin=(1.5, 0, -1.5), x_dir=(0, 0, 1), z_dir=(1, 0, 0))) as chamfer1_piece_5:
        Polygon((1.5, -CHAMFER1_SIZE), (1.5 - CHAMFER1_SIZE_2, 0), (1.5, 0), align=None)
    revolve(axis=Axis((1.5, 0, -1.5), (0, -1, 0)), revolution_arc=90, mode=Mode.SUBTRACT)
    with BuildSketch(Plane(origin=(8.5, 0, -1.5), x_dir=(1, 0, 0), z_dir=(0, 0, -1))) as chamfer1_piece_6:
        Polygon((1.5, -CHAMFER1_SIZE), (1.5 - CHAMFER1_SIZE_2, 0), (1.5, 0), align=None)
    revolve(axis=Axis((8.5, 0, -1.5), (0, -1, 0)), revolution_arc=90, mode=Mode.SUBTRACT)


solid = part.part
